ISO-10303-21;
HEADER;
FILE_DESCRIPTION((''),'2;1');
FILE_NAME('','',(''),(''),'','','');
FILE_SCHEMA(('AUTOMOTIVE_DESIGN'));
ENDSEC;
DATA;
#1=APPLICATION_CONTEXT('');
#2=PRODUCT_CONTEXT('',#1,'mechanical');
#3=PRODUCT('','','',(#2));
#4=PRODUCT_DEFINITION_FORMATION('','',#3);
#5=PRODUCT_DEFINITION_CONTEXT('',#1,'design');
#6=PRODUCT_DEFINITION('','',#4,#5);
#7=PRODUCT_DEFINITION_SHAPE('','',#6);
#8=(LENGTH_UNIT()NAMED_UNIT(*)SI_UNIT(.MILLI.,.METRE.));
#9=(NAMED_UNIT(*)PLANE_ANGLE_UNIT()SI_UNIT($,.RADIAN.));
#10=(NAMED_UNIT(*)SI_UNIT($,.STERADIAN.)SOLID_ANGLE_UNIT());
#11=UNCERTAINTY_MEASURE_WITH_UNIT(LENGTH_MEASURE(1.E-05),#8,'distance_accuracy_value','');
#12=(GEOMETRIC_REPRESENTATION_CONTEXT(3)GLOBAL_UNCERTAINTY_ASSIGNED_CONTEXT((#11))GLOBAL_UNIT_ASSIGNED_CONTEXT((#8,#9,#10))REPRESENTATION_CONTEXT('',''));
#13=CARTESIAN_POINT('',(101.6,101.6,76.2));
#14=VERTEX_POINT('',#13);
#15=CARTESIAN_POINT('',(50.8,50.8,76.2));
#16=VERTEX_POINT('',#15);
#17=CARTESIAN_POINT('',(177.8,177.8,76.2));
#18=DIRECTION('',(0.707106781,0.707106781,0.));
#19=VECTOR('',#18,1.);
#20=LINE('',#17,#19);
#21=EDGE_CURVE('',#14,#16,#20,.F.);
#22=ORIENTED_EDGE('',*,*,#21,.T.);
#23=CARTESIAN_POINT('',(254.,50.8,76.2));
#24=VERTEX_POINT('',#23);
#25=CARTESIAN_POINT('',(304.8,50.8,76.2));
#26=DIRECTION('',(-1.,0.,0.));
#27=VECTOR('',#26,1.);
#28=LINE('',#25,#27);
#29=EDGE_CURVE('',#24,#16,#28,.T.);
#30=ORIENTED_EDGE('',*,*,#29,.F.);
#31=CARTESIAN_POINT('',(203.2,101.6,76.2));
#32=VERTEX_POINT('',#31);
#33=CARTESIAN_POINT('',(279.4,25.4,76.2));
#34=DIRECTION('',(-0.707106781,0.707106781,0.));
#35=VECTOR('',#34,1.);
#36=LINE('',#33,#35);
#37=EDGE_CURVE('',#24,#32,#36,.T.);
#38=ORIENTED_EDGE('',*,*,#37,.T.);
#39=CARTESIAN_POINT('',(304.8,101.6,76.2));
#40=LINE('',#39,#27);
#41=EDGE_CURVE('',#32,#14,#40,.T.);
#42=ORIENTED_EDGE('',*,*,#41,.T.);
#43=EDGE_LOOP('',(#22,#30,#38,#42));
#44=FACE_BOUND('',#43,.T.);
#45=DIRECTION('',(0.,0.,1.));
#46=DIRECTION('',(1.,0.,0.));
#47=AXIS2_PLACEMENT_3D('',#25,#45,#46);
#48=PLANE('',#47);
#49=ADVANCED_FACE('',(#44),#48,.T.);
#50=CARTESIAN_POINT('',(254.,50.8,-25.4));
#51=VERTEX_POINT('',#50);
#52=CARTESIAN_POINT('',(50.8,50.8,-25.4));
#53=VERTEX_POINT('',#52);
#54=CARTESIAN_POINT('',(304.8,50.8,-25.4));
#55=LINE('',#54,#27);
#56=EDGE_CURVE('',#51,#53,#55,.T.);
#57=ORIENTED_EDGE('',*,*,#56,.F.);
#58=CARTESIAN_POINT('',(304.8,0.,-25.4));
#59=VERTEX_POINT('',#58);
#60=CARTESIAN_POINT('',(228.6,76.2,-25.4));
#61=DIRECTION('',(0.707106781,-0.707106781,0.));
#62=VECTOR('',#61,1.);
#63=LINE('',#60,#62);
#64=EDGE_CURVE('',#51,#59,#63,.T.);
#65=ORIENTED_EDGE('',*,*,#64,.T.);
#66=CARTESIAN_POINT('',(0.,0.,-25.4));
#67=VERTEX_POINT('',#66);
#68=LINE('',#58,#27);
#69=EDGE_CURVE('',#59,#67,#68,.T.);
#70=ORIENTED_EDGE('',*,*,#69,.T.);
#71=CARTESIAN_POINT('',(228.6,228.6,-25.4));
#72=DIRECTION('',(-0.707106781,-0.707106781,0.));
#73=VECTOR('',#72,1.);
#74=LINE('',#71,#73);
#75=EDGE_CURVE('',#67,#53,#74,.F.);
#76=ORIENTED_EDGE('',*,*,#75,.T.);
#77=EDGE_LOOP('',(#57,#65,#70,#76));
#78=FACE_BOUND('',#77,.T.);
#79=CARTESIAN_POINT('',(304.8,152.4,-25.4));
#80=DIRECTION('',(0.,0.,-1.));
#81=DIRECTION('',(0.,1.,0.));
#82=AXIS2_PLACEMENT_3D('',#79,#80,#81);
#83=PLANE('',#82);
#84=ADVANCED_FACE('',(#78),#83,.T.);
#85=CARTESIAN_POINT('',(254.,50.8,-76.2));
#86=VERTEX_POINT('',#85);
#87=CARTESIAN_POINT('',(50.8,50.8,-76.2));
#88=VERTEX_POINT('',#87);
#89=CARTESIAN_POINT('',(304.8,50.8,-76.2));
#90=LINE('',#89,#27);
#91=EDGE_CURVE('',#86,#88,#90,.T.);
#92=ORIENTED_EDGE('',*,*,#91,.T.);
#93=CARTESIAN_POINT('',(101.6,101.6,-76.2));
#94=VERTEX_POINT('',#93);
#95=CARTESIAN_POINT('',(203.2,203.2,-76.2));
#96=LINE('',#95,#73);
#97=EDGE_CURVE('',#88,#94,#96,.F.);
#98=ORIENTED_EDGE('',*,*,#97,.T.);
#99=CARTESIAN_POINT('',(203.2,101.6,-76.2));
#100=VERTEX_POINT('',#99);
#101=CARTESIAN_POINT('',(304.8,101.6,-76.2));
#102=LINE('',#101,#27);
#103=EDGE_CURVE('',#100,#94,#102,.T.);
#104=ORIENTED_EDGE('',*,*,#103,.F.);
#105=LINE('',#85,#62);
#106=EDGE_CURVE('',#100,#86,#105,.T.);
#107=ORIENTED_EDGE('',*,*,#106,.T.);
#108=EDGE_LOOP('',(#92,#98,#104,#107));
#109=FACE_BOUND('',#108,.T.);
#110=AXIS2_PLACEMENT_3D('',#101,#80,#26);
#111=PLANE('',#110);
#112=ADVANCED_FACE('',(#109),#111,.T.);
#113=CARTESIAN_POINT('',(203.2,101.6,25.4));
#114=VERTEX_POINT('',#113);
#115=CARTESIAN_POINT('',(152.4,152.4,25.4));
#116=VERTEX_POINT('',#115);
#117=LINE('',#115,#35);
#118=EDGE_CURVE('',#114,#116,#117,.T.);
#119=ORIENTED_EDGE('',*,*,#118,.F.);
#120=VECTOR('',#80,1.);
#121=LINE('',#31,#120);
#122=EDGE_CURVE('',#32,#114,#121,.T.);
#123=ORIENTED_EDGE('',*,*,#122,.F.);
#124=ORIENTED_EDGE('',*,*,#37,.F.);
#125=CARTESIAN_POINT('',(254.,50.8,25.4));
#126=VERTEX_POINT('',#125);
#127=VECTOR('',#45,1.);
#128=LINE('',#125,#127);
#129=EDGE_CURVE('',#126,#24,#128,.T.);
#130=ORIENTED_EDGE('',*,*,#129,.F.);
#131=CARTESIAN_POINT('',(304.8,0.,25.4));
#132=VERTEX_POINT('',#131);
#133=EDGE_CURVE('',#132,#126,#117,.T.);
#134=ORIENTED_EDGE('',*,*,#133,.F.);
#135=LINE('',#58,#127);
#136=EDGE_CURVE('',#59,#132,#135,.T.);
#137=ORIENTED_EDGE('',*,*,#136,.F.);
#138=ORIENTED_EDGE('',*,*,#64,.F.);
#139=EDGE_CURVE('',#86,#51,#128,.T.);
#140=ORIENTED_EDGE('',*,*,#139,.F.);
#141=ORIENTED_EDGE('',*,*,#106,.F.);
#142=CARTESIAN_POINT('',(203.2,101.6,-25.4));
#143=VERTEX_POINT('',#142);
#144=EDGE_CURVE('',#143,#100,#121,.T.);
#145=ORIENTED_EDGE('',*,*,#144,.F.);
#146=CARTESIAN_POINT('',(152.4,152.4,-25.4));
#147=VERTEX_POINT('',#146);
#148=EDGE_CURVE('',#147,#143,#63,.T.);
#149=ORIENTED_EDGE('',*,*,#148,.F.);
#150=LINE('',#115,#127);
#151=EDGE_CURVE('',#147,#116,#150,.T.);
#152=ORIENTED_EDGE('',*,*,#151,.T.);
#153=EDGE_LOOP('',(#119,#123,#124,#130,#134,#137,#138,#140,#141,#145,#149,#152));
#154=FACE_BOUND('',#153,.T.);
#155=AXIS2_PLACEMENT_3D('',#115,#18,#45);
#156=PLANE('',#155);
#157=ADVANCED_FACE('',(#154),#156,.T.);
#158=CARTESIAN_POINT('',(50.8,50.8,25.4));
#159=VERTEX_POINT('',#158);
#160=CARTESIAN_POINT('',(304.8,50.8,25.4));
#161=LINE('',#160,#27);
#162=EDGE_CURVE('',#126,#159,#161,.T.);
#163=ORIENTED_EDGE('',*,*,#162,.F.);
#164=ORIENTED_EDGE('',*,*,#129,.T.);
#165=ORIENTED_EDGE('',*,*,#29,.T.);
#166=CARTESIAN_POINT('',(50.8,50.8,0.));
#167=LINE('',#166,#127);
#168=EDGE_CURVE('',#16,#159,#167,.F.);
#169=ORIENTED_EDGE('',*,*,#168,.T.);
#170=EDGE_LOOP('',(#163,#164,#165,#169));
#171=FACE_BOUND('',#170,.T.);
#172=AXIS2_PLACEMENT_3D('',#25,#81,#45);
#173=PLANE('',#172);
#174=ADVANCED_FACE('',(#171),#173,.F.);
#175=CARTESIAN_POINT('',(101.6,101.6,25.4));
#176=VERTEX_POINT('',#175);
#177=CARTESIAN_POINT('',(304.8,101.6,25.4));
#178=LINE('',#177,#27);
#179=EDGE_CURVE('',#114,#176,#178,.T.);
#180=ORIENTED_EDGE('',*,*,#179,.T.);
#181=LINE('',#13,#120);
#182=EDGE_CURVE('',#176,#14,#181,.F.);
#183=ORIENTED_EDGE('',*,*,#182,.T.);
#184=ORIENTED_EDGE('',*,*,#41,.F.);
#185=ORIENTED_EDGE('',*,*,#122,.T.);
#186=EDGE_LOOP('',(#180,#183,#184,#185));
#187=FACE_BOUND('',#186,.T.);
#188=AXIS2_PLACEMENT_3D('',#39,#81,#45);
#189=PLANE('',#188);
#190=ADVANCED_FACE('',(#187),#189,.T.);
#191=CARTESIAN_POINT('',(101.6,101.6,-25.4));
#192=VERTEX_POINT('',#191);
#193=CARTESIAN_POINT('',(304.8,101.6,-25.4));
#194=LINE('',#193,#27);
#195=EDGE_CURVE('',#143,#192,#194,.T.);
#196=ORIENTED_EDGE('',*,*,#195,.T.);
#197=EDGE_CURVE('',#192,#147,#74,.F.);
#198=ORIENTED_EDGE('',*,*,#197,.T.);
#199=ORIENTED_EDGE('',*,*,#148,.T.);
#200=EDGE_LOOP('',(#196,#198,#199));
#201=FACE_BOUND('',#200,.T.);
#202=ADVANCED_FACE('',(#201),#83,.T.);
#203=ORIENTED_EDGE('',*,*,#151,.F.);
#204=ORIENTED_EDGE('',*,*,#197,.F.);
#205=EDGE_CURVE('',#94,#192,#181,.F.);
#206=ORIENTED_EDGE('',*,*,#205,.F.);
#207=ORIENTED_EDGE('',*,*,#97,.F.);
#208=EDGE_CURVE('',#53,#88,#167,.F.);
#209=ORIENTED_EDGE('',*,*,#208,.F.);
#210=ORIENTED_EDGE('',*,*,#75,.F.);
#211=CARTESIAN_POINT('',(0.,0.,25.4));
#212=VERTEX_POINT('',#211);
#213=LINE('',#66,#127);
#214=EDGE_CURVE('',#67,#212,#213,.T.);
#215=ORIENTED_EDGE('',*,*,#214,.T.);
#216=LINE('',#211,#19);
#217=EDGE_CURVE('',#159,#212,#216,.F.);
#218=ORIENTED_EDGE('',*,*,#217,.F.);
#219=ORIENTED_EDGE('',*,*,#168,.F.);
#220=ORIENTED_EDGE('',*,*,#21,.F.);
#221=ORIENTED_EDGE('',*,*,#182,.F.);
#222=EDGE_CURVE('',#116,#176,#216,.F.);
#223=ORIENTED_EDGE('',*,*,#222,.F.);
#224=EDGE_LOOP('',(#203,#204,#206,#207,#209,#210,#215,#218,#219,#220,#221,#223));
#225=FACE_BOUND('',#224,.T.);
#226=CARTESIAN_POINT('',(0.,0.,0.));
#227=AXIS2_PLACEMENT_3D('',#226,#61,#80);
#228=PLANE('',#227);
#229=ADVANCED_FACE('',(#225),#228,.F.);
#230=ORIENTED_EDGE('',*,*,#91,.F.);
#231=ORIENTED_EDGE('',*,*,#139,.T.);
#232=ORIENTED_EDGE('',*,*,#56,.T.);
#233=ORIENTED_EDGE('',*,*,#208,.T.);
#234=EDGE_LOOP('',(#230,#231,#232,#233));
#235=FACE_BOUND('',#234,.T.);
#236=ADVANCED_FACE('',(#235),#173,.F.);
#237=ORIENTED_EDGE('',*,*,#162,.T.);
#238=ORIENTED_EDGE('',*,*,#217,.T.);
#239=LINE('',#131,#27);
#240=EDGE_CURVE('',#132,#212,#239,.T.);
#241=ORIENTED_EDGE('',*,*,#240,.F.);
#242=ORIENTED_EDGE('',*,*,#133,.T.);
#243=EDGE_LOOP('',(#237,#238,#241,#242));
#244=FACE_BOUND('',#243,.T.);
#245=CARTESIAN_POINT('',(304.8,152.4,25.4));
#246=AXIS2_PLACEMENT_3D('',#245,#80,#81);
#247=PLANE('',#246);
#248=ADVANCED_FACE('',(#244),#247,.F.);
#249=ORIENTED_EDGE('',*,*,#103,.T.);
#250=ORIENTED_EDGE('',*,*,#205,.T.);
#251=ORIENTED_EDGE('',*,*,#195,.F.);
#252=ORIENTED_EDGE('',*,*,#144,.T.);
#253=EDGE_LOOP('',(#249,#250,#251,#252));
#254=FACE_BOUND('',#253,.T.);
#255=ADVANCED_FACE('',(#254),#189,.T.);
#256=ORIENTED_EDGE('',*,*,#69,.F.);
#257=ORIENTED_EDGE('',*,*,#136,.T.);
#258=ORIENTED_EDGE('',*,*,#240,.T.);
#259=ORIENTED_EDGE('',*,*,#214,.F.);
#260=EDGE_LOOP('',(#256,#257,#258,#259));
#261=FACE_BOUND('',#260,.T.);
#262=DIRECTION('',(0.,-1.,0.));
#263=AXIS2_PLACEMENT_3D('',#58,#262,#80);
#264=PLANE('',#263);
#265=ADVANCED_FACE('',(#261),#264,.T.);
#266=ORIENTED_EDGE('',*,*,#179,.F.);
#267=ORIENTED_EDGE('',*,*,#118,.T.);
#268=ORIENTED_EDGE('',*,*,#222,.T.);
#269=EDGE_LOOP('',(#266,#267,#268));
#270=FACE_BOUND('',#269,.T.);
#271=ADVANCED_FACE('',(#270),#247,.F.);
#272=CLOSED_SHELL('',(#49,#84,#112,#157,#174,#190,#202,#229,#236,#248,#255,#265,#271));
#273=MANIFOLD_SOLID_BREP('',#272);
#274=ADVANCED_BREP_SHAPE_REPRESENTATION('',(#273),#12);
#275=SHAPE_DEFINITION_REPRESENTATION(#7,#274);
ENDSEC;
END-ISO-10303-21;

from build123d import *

# Parameters (mm, degrees)
SKETCH1_W           = 50.8
SKETCH1_H           = 152.4
SKETCH1_W_2         = 152.4
SKETCH1_H_2         = 50.8
EXTRUDE_THIN1_DEPTH = 304.8
CHAMFER1_SIZE       = 152.4


with BuildPart() as part:
    # Sketch1 → Extrude-Thin1 (new body)
    with BuildSketch(Plane(origin=(0, 0, 0), x_dir=(0, 0, -1), z_dir=(1, 0, 0))):
        with Locations((0, 76.2)):
            Rectangle(SKETCH1_W, SKETCH1_H)
        with Locations((0, 76.2)):
            Rectangle(SKETCH1_W_2, SKETCH1_H_2)
    extrude(amount=EXTRUDE_THIN1_DEPTH)

    # Chamfer1
    chamfer1_edges = [part.edges().sort_by_distance(p)[0] for p in [
        (304.8, 152.4, 0),
        (0, 152.4, 0),
    ]]
    chamfer(chamfer1_edges, length=CHAMFER1_SIZE - 0.0001)  # a hair under: the kernel refuses the full size


solid = part.part
